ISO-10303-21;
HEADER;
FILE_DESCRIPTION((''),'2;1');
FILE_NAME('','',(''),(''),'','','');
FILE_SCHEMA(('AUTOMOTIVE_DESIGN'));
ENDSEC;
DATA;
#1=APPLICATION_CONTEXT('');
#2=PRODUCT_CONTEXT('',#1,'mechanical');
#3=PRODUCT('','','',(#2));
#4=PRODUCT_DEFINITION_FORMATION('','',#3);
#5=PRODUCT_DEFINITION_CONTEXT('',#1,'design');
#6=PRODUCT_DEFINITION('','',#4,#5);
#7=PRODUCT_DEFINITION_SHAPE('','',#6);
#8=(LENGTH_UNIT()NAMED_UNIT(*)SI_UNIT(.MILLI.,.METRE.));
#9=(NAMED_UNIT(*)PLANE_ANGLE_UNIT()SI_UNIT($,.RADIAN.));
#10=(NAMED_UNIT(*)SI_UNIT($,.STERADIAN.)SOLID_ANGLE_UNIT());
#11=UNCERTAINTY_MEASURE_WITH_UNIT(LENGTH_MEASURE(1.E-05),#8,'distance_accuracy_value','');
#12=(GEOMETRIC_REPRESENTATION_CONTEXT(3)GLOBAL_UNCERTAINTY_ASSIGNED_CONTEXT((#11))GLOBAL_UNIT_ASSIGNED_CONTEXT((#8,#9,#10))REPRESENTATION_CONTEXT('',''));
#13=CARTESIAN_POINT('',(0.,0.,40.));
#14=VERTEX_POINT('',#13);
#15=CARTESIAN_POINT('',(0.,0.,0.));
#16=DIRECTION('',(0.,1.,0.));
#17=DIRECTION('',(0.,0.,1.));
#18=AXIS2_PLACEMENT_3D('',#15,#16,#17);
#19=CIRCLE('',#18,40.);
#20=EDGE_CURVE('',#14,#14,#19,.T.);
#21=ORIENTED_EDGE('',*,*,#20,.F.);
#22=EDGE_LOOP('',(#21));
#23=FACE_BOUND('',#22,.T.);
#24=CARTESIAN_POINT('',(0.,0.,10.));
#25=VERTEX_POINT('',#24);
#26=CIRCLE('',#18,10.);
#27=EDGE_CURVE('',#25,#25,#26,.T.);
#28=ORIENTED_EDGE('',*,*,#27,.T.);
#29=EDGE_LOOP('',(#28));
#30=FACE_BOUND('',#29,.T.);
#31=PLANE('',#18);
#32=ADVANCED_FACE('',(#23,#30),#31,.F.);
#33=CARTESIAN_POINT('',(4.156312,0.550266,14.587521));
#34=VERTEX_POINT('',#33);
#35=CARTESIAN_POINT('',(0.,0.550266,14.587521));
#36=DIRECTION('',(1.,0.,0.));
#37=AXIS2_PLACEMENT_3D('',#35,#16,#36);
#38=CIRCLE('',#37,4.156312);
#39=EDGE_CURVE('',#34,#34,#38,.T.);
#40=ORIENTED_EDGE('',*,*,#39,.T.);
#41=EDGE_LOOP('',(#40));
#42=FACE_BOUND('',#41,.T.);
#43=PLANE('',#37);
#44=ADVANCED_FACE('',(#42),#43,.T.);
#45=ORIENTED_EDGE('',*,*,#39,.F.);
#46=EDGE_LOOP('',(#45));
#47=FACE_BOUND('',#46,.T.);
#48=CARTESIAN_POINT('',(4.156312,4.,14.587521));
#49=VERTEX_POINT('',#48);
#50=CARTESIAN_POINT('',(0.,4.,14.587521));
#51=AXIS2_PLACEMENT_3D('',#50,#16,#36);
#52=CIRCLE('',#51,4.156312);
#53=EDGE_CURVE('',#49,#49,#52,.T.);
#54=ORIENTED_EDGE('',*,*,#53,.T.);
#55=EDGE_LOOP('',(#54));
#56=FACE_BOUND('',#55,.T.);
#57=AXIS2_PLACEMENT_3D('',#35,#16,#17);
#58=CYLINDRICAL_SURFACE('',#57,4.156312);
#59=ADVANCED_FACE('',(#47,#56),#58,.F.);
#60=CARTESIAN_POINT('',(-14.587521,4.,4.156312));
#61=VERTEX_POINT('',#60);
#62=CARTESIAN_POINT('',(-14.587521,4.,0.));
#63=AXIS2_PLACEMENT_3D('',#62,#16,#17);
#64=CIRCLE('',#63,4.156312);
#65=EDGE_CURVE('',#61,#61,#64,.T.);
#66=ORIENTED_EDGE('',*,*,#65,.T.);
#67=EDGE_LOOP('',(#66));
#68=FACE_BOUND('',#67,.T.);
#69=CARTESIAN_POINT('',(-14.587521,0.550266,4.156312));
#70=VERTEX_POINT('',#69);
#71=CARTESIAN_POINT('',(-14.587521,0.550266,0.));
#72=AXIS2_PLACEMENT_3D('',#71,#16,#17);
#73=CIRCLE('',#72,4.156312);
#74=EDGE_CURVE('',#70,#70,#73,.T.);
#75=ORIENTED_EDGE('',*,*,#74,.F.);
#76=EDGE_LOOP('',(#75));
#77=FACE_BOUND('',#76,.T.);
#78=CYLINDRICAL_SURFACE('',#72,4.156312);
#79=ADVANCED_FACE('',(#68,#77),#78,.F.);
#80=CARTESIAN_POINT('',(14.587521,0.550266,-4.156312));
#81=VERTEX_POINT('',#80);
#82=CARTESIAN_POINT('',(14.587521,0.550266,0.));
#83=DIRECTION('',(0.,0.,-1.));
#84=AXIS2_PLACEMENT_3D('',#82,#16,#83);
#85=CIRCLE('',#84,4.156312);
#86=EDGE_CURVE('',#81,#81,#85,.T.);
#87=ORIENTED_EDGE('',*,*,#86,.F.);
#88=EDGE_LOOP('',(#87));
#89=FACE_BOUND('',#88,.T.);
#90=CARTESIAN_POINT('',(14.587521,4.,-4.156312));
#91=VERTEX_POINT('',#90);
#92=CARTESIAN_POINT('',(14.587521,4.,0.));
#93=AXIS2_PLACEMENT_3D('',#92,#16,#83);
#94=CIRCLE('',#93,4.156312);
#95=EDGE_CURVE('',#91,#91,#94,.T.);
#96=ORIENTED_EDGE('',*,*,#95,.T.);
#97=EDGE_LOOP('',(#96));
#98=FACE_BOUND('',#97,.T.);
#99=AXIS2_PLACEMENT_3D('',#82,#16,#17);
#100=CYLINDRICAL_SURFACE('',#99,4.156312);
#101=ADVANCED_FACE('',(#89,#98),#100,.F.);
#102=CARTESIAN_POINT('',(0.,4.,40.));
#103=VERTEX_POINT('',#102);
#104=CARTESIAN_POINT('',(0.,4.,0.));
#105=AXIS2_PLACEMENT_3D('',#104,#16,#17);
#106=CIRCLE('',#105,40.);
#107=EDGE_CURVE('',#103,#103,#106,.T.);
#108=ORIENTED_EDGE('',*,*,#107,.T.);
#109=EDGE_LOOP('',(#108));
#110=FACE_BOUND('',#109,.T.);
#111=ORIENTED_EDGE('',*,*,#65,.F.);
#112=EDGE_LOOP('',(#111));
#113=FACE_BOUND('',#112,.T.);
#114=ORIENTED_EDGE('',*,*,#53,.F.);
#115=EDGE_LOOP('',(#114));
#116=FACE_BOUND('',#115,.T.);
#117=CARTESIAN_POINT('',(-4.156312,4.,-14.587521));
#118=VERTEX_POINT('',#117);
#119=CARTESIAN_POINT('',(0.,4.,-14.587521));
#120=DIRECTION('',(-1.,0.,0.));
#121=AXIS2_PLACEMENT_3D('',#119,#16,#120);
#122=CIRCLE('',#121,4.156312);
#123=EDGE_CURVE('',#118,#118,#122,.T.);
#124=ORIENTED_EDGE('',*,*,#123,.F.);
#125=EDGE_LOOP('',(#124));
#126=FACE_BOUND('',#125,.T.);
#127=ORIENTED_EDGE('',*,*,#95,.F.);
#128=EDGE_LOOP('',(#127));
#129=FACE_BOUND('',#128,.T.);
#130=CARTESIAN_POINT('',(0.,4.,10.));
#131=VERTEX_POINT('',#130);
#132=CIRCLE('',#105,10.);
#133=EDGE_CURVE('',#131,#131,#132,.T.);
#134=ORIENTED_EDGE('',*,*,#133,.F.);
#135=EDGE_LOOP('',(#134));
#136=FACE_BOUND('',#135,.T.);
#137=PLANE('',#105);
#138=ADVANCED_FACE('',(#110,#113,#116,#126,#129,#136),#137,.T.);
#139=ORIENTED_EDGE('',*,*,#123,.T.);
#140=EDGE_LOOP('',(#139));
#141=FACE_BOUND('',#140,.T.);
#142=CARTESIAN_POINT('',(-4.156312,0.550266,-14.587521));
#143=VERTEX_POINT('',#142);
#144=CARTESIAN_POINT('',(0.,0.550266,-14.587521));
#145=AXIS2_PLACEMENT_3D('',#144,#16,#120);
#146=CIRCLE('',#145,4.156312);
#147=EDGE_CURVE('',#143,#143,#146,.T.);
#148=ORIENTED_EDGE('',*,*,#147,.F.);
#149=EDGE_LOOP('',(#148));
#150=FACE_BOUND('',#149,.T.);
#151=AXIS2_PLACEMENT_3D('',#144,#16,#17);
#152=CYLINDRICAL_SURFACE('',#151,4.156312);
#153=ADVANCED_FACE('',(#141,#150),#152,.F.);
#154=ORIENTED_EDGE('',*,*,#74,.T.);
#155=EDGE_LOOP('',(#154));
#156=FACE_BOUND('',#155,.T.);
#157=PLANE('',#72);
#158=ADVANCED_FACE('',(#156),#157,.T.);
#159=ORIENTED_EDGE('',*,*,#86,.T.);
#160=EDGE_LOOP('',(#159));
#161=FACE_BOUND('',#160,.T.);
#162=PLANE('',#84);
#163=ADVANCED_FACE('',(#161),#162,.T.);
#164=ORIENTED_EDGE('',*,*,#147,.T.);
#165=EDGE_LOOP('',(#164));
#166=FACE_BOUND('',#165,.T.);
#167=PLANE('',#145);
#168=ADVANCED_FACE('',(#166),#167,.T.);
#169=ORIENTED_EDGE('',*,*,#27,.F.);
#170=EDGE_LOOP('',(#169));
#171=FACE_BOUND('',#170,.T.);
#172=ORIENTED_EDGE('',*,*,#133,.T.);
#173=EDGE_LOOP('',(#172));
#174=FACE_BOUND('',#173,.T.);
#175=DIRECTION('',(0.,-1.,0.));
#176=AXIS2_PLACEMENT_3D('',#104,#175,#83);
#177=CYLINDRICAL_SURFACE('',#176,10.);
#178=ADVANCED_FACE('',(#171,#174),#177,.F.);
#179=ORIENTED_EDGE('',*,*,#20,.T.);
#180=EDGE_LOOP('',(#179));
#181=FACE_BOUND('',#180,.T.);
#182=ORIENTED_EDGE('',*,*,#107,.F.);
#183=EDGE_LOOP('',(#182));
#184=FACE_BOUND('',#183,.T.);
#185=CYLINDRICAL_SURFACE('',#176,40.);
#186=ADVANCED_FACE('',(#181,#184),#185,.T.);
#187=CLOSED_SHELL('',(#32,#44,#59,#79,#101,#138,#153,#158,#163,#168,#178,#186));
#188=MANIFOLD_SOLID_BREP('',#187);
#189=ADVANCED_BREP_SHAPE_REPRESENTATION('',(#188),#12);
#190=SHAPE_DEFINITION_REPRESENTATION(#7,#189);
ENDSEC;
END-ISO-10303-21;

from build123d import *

# Parameters (mm, degrees)
SKETCH1_R           = 40
BOSS_EXTRUDE1_DEPTH = 4
SKETCH2_R           = 10
CUT_EXTRUDE1_DEPTH  = 57.709787515
SKETCH3_R           = 4.156311898
CUT_EXTRUDE2_DEPTH  = 3.449733719
CIRPATTERN1_COUNT   = 4


with BuildPart() as part:
    # Sketch1 → Boss-Extrude1 (new body)
    with BuildSketch(Plane(origin=(0, 0, 0), x_dir=(1, 0, 0), z_dir=(0, 1, 0))):
        Circle(SKETCH1_R)
    extrude(amount=BOSS_EXTRUDE1_DEPTH)

    # Sketch2 → Cut-Extrude1 (cut, through all)
    with BuildSketch(Plane(origin=(0, 0, 0), x_dir=(1, 0, 0), z_dir=(0, 1, 0))):
        Circle(SKETCH2_R)
    extrude(amount=CUT_EXTRUDE1_DEPTH, mode=Mode.SUBTRACT)

    # Sketch3 → Cut-Extrude2 (cut)
    with BuildSketch(Plane(origin=(0, 4, 0), x_dir=(1, 0, 0), z_dir=(0, 1, 0))):
        with Locations((-14.587520601, 0)):
            Circle(SKETCH3_R)
    cut_extrude2 = extrude(amount=-CUT_EXTRUDE2_DEPTH, mode=Mode.SUBTRACT)

    # CirPattern1: Cut-Extrude2 ×4 about axis
    cirpattern1_axis = Axis((0, 0, 0), (0, 1, 0))
    for i in range(1, CIRPATTERN1_COUNT):
        add(cut_extrude2.rotate(cirpattern1_axis, i * 360 / CIRPATTERN1_COUNT), mode=Mode.SUBTRACT)


solid = part.part
